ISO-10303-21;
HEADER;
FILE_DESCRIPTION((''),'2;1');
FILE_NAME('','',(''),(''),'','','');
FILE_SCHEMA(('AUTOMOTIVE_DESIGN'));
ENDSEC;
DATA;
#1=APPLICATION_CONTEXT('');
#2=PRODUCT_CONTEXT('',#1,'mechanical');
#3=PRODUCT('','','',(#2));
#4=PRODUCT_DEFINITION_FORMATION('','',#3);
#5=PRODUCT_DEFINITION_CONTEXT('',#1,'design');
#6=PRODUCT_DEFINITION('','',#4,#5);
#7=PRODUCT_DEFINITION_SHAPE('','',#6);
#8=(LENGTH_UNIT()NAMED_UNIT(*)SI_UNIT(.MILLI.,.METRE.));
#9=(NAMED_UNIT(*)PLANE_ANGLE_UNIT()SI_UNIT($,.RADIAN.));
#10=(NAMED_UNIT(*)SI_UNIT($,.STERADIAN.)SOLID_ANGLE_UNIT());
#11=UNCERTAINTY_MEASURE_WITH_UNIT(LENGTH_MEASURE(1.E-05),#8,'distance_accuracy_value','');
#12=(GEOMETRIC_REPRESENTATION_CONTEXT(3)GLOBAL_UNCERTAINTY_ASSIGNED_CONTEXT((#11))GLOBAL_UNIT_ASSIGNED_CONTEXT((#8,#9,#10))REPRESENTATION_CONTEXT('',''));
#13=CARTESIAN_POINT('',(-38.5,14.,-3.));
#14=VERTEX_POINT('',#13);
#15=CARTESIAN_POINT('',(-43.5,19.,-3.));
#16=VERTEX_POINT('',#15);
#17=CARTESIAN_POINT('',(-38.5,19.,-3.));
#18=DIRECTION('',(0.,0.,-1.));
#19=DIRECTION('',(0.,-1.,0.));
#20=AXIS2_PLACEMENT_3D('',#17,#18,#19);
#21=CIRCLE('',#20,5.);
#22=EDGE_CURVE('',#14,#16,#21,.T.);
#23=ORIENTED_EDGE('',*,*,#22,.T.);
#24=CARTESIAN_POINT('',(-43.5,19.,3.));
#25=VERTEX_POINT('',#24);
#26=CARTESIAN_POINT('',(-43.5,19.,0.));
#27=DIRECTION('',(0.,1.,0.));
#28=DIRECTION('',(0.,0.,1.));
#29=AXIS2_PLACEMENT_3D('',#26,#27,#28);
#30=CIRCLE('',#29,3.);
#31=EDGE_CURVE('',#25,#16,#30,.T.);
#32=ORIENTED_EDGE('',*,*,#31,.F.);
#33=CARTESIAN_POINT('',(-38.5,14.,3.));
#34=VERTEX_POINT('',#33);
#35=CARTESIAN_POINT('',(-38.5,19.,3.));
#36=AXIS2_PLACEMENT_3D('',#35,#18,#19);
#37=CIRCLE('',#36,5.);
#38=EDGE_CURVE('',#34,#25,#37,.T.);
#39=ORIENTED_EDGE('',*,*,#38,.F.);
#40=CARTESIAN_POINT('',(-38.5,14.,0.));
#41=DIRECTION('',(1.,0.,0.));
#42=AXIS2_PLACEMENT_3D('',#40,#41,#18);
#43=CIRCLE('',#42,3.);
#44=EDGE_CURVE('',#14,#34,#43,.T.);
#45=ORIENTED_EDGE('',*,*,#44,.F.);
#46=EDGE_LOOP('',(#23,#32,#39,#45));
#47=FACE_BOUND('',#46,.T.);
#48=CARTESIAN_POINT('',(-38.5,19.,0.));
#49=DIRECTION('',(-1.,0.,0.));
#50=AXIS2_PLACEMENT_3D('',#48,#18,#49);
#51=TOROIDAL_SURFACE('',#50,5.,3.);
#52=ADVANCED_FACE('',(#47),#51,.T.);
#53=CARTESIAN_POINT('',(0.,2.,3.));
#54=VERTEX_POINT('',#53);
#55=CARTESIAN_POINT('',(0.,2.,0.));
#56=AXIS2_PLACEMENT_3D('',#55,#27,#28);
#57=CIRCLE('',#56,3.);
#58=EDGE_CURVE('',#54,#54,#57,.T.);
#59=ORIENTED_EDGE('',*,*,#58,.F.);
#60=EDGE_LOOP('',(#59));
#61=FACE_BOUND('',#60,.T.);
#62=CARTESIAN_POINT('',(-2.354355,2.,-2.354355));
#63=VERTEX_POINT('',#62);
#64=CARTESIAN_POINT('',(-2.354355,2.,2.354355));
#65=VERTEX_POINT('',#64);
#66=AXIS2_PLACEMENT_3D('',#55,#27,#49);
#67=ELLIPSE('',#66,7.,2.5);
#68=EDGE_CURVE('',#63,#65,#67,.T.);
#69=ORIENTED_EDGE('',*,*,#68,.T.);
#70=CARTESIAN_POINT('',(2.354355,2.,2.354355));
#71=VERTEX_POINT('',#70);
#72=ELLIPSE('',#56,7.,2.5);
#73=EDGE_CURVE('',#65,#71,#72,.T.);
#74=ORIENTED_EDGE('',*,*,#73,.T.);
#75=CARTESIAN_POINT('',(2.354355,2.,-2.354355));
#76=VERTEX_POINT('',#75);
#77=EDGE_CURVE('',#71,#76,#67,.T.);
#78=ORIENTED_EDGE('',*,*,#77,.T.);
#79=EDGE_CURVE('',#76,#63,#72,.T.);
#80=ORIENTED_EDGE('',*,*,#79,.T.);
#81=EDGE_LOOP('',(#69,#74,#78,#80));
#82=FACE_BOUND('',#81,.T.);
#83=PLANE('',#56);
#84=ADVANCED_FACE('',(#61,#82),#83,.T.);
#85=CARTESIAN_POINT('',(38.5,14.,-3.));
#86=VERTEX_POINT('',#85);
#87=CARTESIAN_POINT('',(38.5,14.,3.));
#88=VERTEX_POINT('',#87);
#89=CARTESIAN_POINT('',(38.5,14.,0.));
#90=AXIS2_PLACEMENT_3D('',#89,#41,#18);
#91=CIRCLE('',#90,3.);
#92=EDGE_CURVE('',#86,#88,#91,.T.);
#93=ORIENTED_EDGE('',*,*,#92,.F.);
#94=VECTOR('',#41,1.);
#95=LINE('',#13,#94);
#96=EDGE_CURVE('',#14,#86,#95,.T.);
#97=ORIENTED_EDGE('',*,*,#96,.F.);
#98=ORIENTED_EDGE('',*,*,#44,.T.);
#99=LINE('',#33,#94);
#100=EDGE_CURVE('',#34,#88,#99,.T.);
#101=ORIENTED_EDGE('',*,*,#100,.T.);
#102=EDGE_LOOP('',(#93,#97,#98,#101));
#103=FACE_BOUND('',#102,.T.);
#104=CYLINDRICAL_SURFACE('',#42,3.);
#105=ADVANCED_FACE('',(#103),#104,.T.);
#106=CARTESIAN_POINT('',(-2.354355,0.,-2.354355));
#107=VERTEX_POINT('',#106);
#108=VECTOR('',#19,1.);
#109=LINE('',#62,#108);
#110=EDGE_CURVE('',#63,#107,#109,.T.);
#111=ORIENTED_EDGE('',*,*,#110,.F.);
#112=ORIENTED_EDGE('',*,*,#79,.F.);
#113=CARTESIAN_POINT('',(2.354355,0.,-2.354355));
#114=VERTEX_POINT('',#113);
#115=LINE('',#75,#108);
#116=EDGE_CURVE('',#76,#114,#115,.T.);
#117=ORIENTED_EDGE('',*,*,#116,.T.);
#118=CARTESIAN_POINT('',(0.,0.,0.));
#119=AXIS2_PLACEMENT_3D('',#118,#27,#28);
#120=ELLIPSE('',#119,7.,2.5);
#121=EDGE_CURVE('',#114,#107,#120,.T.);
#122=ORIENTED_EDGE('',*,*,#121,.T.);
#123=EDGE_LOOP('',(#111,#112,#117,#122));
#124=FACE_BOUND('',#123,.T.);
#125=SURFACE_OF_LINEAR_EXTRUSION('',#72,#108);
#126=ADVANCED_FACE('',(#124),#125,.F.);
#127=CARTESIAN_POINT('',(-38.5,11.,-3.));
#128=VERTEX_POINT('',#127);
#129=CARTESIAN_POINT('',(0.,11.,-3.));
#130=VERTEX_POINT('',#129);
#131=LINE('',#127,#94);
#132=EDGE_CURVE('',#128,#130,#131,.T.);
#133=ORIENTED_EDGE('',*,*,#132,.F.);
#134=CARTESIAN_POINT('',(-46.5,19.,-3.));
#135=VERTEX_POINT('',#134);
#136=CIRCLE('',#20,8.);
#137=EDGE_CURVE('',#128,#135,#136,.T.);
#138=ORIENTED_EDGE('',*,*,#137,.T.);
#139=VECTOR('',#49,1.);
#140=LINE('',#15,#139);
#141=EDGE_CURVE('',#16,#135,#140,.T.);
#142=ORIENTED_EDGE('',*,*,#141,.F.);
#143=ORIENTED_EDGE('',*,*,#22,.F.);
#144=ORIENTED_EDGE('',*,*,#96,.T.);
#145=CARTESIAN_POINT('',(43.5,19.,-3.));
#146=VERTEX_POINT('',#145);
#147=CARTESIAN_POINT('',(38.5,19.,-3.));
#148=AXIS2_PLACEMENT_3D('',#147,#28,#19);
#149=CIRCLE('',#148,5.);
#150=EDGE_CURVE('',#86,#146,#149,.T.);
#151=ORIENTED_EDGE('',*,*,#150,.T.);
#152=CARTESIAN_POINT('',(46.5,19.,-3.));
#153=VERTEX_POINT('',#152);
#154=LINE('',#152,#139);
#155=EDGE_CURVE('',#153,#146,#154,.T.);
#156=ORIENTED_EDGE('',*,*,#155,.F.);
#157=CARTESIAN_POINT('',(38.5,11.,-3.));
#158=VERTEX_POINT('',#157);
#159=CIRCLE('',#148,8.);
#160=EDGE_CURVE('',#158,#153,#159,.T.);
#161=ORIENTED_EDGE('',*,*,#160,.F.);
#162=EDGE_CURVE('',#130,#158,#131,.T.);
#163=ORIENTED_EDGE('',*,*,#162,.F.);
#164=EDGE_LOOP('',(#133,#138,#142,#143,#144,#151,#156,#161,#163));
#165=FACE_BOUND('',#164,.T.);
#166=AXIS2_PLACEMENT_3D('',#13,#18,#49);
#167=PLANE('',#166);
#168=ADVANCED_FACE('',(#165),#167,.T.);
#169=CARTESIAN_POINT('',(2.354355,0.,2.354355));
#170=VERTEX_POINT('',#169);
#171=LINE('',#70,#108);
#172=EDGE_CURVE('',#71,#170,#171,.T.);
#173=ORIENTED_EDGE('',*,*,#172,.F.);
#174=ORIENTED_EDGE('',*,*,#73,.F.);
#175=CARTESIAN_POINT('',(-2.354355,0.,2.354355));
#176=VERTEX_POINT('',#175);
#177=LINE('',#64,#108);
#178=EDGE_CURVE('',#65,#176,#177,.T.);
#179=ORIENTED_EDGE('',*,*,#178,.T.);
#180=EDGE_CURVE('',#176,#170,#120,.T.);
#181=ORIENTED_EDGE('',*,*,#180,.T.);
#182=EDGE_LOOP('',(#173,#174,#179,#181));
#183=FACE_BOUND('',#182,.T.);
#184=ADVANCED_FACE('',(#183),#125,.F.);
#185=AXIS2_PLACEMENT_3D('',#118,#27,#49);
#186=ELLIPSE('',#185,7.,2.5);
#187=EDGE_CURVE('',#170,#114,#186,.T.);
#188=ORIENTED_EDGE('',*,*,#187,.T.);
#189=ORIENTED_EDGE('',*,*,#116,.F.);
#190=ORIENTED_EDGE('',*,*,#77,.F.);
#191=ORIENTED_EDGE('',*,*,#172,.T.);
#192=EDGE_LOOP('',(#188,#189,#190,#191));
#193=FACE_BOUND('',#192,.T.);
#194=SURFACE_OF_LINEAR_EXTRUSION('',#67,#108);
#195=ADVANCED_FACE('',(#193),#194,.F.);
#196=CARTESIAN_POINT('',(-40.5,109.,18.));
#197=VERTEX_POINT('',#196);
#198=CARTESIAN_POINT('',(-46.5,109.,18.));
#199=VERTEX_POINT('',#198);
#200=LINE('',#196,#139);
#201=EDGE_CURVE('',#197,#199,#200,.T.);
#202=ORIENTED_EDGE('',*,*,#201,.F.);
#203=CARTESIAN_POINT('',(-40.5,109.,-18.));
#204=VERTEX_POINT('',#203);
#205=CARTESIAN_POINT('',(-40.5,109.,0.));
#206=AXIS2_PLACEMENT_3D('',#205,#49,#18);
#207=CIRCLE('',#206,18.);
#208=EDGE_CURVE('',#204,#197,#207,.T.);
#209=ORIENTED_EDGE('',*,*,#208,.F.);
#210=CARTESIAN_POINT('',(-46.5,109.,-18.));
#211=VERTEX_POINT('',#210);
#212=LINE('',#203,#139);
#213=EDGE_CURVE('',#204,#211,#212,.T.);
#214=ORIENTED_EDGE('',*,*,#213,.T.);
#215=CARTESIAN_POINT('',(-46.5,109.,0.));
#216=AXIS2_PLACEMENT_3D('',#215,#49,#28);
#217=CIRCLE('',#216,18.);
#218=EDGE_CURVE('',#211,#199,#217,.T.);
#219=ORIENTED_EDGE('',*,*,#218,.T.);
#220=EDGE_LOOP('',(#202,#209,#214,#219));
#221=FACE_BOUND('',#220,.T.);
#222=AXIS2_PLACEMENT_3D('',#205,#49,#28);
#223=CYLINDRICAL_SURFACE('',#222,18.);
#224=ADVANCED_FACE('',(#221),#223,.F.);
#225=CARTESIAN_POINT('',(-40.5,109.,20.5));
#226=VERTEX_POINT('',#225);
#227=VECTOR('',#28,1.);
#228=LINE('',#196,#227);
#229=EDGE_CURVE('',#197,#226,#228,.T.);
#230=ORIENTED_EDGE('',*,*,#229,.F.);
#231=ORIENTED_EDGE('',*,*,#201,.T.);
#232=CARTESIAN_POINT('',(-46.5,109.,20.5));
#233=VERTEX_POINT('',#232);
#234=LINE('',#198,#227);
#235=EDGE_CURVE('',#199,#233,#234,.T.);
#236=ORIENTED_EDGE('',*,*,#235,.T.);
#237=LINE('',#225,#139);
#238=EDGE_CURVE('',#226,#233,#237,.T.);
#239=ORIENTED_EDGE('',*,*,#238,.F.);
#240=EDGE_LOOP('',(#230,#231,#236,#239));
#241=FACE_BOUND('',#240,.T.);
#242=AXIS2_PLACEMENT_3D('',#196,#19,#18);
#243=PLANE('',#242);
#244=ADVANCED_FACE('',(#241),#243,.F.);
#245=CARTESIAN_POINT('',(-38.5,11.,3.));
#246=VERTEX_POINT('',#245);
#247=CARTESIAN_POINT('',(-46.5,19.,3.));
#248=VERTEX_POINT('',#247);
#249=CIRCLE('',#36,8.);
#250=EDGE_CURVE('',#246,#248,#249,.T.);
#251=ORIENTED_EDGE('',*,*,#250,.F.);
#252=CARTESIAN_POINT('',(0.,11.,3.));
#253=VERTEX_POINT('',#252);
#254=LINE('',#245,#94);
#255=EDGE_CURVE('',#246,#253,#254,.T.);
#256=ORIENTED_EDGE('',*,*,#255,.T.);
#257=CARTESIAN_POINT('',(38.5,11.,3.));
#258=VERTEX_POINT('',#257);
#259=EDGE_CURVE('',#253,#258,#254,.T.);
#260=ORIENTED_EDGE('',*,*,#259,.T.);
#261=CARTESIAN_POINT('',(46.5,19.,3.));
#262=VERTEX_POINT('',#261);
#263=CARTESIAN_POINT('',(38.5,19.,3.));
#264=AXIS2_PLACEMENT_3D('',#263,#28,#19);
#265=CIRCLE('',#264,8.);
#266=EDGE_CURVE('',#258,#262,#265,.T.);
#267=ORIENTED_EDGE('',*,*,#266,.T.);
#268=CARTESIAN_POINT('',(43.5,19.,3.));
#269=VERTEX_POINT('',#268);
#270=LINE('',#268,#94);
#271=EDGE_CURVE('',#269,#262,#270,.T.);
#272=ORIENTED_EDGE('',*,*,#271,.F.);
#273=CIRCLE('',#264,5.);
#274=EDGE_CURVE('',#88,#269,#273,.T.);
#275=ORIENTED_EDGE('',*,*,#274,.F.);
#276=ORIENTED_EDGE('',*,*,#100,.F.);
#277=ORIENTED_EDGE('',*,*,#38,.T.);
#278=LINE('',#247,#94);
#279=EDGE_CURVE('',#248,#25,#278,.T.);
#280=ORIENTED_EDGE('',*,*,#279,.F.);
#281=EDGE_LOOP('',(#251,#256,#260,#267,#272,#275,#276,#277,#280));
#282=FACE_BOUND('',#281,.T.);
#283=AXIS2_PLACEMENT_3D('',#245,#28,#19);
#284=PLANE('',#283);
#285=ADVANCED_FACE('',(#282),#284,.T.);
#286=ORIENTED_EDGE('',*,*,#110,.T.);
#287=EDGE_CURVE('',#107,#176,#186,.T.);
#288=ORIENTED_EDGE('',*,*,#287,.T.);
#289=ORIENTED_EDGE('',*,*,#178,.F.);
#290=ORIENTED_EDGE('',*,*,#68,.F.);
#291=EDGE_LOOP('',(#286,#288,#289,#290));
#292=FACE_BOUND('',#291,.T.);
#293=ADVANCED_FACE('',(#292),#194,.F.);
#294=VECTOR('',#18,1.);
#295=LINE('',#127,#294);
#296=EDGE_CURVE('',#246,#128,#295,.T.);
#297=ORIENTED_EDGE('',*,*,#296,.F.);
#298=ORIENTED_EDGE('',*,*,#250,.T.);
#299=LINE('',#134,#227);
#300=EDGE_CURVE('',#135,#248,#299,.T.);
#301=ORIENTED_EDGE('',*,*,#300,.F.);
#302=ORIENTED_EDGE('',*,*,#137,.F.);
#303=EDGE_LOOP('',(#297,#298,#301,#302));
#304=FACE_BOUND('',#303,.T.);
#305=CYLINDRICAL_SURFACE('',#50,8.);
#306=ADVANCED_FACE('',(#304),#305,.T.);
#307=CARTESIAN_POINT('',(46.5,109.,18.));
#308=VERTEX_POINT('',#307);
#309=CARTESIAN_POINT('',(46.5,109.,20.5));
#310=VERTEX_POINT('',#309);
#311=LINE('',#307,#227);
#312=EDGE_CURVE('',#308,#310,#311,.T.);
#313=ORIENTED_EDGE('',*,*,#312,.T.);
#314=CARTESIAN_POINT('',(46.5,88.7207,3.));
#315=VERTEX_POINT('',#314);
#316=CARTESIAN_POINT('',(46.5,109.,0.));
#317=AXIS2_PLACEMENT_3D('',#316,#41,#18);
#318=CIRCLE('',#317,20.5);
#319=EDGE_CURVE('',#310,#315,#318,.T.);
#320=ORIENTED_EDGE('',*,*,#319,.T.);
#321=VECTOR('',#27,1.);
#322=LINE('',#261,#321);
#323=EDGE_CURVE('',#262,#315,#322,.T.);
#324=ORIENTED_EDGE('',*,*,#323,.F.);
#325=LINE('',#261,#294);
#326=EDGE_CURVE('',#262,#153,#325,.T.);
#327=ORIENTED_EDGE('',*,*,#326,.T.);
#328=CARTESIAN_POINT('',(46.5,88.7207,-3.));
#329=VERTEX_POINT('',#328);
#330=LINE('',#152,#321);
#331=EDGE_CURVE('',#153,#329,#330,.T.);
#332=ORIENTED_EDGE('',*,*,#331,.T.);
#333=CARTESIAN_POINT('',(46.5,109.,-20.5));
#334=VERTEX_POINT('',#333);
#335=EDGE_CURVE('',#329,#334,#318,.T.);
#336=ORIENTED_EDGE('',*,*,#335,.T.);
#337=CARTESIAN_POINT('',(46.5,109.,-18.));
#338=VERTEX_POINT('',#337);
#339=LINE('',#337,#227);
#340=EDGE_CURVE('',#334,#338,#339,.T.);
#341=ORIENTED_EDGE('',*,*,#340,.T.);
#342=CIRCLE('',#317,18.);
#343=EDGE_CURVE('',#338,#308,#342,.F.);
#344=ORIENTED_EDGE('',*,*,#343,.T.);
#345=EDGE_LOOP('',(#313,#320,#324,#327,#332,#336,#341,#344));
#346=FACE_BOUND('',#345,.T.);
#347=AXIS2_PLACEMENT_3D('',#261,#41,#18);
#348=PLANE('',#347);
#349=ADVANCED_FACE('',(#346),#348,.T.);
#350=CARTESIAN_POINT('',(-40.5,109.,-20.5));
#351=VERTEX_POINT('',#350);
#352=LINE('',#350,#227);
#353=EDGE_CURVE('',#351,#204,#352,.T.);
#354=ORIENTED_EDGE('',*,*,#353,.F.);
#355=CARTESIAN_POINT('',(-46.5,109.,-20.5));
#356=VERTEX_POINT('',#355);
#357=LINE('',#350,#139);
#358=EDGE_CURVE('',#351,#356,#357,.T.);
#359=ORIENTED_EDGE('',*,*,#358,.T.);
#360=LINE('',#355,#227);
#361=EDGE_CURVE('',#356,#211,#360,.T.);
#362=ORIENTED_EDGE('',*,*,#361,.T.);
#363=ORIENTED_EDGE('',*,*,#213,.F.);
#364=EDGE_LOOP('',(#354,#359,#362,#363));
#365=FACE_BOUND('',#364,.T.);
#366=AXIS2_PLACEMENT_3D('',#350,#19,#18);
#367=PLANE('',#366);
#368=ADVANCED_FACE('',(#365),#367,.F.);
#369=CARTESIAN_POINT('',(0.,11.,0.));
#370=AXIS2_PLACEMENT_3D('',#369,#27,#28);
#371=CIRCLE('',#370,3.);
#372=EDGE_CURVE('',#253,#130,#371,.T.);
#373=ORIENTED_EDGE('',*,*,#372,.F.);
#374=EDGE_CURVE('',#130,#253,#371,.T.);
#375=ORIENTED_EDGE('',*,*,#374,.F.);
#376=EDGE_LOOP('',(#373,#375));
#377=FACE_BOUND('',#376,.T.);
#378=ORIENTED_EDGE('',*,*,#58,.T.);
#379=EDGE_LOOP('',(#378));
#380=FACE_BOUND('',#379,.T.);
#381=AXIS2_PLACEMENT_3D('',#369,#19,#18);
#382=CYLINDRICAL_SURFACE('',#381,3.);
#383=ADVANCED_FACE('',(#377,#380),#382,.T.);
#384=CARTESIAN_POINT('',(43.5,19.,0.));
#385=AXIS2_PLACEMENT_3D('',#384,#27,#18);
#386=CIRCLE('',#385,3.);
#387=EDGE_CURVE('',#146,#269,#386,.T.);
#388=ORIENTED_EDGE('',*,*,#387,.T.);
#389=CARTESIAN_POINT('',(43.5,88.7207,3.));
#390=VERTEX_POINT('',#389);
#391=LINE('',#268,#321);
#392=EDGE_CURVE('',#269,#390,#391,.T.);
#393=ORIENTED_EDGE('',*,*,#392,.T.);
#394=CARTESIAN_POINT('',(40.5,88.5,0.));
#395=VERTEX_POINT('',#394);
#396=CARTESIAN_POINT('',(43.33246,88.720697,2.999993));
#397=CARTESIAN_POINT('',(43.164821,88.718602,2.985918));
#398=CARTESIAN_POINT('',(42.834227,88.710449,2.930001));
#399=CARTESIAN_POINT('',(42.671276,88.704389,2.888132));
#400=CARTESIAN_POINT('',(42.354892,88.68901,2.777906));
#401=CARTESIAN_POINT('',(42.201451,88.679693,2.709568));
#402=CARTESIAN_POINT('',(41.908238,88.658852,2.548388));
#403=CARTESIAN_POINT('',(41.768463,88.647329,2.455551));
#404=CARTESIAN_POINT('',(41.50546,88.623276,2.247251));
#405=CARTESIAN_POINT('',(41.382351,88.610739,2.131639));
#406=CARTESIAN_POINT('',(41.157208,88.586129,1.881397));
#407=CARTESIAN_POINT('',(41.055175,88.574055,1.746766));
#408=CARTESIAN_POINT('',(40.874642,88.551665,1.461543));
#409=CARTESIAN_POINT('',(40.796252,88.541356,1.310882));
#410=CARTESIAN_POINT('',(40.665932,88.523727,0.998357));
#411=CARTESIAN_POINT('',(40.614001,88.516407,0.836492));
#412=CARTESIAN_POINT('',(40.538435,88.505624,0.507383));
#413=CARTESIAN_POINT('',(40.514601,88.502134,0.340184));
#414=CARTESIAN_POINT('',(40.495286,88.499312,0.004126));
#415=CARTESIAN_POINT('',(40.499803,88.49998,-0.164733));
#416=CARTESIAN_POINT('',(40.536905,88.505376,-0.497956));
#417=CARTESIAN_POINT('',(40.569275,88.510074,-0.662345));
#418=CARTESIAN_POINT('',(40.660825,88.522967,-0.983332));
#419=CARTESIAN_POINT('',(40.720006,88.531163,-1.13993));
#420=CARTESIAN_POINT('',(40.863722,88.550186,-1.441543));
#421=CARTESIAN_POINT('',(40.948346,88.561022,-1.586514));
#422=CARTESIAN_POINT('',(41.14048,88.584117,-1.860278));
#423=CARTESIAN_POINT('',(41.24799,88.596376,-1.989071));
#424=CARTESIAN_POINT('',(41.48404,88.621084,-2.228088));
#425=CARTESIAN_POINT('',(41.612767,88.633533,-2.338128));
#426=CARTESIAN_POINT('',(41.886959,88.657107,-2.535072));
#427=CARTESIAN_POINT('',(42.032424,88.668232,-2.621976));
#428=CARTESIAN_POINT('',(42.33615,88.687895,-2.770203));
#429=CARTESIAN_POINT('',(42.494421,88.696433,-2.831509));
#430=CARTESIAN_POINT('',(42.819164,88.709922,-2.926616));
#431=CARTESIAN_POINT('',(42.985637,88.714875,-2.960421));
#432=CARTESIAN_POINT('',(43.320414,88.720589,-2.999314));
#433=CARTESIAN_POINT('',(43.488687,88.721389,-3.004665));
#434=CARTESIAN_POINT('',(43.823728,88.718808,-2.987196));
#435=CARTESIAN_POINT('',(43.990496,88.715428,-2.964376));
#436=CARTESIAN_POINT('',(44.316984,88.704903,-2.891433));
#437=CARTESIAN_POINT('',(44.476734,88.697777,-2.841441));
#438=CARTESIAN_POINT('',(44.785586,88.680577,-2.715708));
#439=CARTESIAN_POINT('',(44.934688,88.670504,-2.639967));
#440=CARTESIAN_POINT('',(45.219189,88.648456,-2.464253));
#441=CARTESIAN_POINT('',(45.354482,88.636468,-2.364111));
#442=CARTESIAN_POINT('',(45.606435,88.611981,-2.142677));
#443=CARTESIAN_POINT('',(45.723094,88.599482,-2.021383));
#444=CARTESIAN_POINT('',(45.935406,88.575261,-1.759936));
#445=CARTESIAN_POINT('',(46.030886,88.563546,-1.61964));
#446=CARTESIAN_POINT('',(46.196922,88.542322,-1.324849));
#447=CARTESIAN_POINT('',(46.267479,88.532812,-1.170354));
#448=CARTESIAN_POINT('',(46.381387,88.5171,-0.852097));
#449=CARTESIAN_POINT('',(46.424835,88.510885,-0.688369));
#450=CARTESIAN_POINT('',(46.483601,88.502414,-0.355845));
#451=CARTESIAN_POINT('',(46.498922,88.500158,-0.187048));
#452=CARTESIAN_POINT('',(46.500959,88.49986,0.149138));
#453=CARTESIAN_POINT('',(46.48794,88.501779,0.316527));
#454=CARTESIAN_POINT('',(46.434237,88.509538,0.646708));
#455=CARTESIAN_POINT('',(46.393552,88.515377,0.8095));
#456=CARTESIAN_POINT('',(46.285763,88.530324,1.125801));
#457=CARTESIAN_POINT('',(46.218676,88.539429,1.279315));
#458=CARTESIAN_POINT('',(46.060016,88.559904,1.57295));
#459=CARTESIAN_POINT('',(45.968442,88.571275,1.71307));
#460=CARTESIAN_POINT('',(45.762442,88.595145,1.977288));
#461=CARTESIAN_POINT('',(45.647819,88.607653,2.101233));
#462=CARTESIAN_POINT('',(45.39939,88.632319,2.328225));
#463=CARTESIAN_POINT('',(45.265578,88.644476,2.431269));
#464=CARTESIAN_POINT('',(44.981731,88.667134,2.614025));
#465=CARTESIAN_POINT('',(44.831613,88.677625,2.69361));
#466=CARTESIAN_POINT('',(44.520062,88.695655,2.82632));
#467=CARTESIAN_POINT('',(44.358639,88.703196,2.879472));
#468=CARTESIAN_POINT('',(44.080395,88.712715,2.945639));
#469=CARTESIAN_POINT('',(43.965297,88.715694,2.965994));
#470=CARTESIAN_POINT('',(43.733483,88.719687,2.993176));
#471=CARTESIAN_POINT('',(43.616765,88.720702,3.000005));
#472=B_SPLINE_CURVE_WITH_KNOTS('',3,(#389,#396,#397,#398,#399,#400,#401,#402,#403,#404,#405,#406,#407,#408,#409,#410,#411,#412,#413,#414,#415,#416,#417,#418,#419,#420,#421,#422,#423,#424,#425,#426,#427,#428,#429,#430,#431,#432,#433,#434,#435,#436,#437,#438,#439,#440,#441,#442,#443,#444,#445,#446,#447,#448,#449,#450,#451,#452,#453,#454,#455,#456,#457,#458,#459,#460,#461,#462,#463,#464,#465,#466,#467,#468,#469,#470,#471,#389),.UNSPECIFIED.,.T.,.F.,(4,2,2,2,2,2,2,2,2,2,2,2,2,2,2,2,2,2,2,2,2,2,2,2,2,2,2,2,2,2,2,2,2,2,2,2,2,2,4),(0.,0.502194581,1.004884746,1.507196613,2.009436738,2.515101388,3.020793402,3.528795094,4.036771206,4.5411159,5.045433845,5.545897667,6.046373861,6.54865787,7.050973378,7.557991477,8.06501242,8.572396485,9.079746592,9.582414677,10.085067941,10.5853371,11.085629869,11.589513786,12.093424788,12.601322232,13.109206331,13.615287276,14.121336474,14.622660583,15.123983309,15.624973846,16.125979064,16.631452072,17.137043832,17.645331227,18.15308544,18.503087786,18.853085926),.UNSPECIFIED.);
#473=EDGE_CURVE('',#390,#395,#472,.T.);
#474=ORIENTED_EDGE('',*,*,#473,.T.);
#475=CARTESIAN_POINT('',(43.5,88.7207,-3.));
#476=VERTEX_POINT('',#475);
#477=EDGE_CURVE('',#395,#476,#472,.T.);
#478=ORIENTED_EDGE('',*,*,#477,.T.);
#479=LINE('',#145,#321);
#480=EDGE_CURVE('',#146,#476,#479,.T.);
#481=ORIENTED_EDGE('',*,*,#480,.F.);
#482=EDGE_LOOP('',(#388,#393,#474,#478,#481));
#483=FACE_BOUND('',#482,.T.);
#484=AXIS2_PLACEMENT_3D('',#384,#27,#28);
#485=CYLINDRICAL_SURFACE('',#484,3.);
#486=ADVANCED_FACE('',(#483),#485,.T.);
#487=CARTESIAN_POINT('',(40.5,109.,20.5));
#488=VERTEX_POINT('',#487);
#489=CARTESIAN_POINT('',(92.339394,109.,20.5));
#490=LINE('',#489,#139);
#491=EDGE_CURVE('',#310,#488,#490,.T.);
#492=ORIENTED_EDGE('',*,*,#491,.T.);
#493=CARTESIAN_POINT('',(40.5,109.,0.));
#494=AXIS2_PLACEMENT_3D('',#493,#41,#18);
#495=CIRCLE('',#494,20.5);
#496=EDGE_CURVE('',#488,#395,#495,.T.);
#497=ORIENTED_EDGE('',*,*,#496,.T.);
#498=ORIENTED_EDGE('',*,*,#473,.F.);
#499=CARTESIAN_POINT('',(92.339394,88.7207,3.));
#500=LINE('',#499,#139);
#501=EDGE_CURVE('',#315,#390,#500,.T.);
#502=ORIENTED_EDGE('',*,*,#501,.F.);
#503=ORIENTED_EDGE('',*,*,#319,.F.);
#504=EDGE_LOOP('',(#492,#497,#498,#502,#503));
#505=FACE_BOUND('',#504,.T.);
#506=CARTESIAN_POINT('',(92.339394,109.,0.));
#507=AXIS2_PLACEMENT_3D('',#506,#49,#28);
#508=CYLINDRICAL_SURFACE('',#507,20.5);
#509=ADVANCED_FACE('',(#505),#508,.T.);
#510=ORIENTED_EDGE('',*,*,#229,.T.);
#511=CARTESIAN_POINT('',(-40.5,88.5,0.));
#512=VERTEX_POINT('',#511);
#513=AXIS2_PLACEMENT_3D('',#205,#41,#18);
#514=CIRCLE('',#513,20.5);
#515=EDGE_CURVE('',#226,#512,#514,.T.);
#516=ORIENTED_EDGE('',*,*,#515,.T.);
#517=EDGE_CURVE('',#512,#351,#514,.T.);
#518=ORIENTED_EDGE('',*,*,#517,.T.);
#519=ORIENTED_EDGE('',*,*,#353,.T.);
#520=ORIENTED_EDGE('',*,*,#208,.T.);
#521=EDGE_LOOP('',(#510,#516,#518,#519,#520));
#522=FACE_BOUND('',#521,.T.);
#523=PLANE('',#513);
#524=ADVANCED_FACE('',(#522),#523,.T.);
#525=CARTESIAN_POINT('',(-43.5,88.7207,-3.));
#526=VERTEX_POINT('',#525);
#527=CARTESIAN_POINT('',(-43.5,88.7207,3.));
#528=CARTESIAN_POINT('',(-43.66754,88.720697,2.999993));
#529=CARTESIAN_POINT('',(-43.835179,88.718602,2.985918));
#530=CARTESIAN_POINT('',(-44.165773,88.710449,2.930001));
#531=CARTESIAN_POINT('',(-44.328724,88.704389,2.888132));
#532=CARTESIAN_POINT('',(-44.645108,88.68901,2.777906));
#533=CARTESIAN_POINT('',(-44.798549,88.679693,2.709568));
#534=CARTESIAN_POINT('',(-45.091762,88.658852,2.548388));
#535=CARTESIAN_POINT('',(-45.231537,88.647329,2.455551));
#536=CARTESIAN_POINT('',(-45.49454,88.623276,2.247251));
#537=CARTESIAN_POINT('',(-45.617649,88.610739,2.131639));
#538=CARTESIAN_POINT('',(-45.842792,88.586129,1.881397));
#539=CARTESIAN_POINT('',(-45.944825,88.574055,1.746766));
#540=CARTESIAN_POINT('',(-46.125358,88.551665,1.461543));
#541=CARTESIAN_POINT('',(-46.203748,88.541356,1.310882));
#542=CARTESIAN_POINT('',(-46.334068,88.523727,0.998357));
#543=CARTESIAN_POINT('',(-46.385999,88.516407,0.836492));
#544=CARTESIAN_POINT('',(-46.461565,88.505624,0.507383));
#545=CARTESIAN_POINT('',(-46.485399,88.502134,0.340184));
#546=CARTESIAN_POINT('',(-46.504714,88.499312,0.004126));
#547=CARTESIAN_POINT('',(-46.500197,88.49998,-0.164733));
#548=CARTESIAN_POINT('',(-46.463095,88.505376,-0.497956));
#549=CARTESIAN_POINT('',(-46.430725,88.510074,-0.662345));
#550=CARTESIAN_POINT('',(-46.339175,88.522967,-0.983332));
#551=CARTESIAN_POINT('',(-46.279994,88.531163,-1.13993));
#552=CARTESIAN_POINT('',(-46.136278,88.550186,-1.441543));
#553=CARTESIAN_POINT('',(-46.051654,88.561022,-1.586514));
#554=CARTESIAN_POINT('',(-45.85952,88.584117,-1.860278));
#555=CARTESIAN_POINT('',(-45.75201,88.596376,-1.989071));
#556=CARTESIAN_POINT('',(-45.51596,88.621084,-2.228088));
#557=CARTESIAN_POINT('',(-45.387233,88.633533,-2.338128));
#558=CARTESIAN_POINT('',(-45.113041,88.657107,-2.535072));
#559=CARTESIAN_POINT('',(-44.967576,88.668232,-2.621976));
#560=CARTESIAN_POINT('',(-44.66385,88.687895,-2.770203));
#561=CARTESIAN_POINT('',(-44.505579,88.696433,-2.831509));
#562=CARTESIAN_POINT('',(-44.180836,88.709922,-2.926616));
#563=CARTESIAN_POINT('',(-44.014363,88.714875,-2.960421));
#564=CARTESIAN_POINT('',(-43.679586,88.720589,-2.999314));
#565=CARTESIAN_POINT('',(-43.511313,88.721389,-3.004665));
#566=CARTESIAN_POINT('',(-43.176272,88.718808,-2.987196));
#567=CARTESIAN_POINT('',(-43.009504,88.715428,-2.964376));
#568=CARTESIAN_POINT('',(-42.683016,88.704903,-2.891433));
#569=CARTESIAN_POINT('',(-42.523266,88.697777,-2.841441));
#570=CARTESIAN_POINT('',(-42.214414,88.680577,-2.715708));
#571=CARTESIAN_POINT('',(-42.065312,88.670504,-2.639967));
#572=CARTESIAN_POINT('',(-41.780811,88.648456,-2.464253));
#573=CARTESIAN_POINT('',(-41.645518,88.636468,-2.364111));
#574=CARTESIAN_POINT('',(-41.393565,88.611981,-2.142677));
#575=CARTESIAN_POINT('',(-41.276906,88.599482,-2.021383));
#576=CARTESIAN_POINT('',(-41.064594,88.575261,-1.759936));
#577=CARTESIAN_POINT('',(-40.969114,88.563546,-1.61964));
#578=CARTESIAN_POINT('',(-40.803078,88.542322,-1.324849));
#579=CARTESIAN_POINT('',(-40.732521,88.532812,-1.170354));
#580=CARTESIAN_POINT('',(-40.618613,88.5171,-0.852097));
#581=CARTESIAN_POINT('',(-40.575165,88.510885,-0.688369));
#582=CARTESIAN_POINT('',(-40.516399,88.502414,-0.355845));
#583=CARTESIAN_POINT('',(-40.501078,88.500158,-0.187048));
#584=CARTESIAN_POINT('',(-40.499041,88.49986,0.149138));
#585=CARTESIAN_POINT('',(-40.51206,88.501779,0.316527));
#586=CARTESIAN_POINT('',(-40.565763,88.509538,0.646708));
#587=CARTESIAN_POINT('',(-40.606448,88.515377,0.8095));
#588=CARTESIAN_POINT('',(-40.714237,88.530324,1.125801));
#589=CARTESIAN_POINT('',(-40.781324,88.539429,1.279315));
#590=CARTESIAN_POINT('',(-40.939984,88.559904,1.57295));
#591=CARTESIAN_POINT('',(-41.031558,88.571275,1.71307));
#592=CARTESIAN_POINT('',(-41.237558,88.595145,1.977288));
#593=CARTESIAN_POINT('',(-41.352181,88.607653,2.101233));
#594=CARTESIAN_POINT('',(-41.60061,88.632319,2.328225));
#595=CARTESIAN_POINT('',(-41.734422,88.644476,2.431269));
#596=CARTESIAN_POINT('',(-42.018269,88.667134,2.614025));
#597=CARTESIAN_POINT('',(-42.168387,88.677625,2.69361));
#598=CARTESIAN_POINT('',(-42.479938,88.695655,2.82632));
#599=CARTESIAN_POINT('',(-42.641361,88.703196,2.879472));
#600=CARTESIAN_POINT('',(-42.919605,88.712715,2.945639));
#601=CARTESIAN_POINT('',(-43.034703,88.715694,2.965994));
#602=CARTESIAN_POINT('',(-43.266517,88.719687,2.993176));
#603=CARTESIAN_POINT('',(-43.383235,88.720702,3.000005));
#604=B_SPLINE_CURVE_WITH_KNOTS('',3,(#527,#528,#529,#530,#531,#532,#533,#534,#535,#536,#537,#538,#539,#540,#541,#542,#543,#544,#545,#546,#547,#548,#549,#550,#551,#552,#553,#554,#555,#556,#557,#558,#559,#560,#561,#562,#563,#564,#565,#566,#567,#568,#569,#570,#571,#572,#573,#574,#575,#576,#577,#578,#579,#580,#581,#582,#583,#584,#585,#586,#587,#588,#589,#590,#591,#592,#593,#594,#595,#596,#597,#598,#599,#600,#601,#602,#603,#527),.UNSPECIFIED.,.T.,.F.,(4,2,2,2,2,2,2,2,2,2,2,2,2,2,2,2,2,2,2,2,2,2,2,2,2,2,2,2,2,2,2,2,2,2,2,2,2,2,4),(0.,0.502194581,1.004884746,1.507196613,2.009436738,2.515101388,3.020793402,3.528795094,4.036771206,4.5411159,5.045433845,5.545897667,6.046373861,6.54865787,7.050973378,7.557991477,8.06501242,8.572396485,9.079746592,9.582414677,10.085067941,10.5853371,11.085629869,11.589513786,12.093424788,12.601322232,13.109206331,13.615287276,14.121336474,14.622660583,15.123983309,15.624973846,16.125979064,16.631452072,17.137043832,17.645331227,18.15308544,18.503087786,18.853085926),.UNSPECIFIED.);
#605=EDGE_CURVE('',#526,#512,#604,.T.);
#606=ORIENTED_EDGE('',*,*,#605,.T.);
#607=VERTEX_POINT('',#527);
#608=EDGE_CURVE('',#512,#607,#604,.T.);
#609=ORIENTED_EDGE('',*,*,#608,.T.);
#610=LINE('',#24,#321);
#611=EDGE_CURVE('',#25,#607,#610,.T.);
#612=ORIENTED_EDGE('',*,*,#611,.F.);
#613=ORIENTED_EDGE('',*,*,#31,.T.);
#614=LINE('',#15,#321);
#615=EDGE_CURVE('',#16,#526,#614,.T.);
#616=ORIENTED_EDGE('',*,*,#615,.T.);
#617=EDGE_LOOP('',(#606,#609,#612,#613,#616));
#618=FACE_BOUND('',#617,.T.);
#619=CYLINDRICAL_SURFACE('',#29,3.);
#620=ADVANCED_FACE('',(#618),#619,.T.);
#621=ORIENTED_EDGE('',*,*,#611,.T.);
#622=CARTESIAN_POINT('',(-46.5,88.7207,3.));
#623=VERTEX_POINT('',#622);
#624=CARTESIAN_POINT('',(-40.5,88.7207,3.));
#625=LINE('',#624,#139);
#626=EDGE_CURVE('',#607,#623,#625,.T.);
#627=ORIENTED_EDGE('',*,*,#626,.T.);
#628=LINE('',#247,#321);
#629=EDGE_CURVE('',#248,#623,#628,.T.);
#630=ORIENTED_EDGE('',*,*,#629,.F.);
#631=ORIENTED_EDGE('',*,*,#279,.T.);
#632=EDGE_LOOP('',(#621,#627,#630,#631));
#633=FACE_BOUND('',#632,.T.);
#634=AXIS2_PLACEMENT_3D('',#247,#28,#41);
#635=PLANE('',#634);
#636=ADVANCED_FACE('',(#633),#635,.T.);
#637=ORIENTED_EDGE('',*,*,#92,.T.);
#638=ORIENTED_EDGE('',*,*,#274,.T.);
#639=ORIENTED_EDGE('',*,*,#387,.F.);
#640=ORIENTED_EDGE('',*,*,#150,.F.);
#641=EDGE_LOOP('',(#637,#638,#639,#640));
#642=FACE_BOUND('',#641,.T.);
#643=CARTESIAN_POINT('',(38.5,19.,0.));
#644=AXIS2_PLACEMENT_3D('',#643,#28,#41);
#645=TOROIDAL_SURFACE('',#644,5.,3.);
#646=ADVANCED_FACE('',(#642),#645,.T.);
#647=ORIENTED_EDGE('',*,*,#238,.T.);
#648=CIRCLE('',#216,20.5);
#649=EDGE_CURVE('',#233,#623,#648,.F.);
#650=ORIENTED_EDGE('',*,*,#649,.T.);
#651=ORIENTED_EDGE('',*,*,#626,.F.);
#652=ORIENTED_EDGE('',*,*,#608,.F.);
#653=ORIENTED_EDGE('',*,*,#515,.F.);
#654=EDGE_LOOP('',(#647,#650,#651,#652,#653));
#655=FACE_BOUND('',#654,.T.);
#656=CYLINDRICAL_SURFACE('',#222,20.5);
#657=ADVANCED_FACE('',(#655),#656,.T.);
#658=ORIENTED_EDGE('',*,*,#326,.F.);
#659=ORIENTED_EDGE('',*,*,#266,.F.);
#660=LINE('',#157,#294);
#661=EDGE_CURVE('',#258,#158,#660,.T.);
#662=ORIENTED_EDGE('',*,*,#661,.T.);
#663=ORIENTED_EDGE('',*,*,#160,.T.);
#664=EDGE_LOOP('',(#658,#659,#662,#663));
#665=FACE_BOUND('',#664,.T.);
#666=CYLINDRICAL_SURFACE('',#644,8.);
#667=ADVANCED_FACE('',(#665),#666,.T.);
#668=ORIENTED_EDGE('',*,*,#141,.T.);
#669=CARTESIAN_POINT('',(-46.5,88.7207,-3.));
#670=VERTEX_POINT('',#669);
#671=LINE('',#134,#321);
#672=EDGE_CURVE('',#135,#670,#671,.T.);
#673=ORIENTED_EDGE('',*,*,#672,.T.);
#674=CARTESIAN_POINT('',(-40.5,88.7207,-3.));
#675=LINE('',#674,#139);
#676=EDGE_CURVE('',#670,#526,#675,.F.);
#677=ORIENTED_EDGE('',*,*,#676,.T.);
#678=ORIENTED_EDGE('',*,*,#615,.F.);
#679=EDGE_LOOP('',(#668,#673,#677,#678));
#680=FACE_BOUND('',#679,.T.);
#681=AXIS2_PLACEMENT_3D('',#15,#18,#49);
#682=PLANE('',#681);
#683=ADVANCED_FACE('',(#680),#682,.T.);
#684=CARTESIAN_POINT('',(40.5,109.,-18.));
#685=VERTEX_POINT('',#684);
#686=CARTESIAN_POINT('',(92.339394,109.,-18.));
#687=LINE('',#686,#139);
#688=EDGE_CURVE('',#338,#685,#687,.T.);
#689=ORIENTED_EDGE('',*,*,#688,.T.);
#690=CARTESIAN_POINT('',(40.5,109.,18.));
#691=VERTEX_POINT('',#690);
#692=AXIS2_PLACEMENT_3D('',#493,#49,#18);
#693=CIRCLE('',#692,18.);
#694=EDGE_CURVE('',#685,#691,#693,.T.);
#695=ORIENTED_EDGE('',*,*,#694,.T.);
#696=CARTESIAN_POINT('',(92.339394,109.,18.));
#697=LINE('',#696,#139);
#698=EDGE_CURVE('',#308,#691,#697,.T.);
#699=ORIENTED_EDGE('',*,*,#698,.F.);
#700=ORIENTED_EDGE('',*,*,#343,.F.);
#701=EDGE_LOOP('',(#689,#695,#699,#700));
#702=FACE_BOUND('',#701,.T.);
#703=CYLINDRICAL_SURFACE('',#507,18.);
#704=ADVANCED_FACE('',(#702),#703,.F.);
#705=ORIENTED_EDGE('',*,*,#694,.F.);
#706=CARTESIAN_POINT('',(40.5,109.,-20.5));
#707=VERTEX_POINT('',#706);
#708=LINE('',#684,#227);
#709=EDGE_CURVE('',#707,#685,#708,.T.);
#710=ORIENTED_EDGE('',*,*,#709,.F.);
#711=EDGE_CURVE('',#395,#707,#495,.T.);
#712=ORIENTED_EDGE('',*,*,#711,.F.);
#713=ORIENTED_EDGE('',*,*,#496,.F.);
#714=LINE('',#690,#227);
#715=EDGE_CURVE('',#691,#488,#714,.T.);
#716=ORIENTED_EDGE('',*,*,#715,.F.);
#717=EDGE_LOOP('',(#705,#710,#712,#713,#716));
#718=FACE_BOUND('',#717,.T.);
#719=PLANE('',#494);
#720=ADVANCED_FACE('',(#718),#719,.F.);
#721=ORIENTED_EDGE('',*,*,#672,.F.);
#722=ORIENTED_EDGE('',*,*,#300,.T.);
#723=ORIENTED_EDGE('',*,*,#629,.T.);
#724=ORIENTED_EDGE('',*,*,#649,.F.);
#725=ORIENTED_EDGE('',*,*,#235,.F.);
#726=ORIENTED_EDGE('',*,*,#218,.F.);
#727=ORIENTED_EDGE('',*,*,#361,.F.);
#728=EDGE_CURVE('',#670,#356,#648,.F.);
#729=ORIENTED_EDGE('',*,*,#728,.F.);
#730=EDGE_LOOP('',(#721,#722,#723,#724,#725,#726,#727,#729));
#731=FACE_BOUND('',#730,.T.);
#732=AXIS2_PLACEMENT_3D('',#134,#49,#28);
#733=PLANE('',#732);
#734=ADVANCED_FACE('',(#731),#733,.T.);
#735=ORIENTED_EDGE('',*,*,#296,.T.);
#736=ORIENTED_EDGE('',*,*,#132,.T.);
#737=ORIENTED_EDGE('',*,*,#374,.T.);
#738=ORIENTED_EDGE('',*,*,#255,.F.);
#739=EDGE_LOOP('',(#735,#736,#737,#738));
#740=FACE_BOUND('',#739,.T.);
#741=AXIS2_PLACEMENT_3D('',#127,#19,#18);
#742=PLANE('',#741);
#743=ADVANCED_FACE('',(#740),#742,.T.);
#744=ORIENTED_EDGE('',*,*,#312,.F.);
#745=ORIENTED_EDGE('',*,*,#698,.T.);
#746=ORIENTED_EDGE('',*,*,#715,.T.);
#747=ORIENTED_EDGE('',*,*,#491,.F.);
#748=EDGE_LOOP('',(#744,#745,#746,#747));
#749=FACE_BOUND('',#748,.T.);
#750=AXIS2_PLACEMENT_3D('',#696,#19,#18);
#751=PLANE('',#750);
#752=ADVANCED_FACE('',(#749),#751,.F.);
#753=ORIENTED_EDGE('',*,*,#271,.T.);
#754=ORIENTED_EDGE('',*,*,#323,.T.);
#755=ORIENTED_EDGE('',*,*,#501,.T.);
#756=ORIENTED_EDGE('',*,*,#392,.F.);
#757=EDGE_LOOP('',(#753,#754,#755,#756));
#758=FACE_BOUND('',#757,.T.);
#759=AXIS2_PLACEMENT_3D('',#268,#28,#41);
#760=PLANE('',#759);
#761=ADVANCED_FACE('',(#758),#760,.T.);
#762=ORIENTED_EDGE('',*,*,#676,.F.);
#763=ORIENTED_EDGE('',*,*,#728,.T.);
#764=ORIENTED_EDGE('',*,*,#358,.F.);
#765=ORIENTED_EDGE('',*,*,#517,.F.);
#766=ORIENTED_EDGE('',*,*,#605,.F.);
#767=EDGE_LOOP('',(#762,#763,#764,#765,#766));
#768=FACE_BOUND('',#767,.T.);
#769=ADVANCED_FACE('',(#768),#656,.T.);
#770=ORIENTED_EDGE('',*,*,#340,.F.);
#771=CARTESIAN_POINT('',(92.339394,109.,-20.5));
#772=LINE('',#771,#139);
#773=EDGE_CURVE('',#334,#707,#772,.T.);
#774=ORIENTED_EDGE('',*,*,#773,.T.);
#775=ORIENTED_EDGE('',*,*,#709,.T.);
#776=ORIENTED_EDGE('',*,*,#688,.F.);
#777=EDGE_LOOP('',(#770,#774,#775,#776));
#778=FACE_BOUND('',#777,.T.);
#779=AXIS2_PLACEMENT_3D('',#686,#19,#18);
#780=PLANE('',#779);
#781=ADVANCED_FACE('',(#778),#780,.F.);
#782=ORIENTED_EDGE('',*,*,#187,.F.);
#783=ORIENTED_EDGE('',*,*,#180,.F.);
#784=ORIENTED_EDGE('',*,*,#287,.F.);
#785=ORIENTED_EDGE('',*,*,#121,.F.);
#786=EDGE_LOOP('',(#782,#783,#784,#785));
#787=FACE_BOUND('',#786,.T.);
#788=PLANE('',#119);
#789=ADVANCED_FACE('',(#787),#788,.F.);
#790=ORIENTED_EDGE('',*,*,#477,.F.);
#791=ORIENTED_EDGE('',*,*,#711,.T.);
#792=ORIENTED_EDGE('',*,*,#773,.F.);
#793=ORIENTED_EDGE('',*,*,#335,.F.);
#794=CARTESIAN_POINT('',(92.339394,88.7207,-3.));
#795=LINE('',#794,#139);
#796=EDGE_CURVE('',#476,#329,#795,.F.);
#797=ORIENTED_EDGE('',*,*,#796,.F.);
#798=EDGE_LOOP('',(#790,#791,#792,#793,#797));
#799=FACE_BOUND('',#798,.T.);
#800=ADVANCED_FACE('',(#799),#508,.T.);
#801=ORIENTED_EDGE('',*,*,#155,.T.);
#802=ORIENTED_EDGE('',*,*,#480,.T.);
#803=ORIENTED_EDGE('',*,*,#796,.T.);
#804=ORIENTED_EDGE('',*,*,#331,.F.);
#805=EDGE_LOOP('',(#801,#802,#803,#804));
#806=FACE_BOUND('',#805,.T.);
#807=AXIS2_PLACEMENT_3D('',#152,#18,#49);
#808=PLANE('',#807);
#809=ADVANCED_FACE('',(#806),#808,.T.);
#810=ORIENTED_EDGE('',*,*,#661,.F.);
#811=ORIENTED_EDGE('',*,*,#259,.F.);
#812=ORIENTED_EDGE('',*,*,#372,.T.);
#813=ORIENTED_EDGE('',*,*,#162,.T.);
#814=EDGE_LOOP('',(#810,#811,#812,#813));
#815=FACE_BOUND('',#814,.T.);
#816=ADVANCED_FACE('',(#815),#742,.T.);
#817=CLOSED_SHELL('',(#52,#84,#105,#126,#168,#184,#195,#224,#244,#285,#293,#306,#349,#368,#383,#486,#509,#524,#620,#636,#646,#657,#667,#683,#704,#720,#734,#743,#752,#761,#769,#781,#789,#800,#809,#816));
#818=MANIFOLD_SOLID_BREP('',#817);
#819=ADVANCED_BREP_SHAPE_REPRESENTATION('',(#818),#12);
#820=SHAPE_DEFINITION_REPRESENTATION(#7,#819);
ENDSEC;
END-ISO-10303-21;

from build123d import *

# Parameters (mm, degrees)
BOSS_EXTRUDE3_DEPTH             = 2
SKETCH3_R                       = 3
BOSS_EXTRUDE4_DEPTH             = 9
BOSS_EXTRUDE5_DEPTH             = 38.5
BOSS_EXTRUDE5_DEPTH_BACK        = 38.5
SWEEP2_START                    = 11
SWEEP2_DEPTH                    = 78
SWEEP2_2_DEPTH                  = 8
SWEEP2_START_2                  = -4
SWEEP2_3_DEPTH                  = 8
SWEEP4_START                    = 11
SWEEP4_DEPTH                    = 78
SWEEP4_2_DEPTH                  = 8
SWEEP4_START_2                  = -4
SWEEP4_3_DEPTH                  = 8
BOSS_EXTRUDE6_DEPTH             = 3
BOSS_EXTRUDE6_DIRECTION_2_REACH = 128.768
BOSS_EXTRUDE7_DEPTH             = 3
BOSS_EXTRUDE7_DEPTH_BACK        = 3


with BuildPart() as part:
    # Sketch2 → Boss-Extrude3 (new body)
    with BuildSketch(Plane(origin=(0, 0, 0), x_dir=(1, 0, 0), z_dir=(0, 1, 0))):
        with BuildLine():
            add(Edge.make_bspline(
                [(-2.354354779, -2.354354779), (0, -20.812496246), (2.354354779, -2.354354779)],
                knots=[5.055412921, 5.055412921, 5.055412921, 7.510957694, 7.510957694, 7.510957694], degree=2, weights=[1, 0.336336397, 1]))
            add(Edge.make_bspline(
                [(2.354354779, -2.354354779), (20.812496246, 0), (2.354354779, 2.354354779)],
                knots=[1.913820267, 1.913820267, 1.913820267, 4.36936504, 4.36936504, 4.36936504], degree=2, weights=[1, 0.336336397, 1]))
            add(Edge.make_bspline(
                [(2.354354779, 2.354354779), (0, 20.812496246), (-2.354354779, 2.354354779)],
                knots=[1.913820267, 1.913820267, 1.913820267, 4.36936504, 4.36936504, 4.36936504], degree=2, weights=[1, 0.336336397, 1]))
            add(Edge.make_bspline(
                [(-2.354354779, 2.354354779), (-20.812496246, 0), (-2.354354779, -2.354354779)],
                knots=[5.055412921, 5.055412921, 5.055412921, 7.510957694, 7.510957694, 7.510957694], degree=2, weights=[1, 0.336336397, 1]))
        make_face()
    extrude(amount=BOSS_EXTRUDE3_DEPTH)

    # Sketch3 → Boss-Extrude4 (add)
    with BuildSketch(Plane(origin=(0, 2, 0), x_dir=(1, 0, 0), z_dir=(0, 1, 0))):
        with Locations(Location((0, 0, 0), (0, 0, 270))):
            Circle(SKETCH3_R)
    extrude(amount=BOSS_EXTRUDE4_DEPTH)

    # Sketch4 → Boss-Extrude5 (add, two sides: drawn at the far end of the back side and taken through both)
    with BuildSketch(Plane(origin=(0, 0, 0), x_dir=(0, 0, -1), z_dir=(1, 0, 0)).offset(-BOSS_EXTRUDE5_DEPTH_BACK)):
        with BuildLine():
            Line((3, 11), (-3, 11))
            Line((-3, 11), (-3, 14))
            ThreePointArc((-3, 14), (0, 17), (3, 14))
            Line((3, 14), (3, 11))
        make_face()
    extrude(amount=BOSS_EXTRUDE5_DEPTH + BOSS_EXTRUDE5_DEPTH_BACK)



with BuildPart() as body_2:
    # Sweep2: read off the stored shape, not the designer's step
    # Sweep2 outline → Sweep2 (new body)
    with BuildSketch(Plane(origin=(0, 0, 0), x_dir=(1, 0, 0), z_dir=(0, 1, 0)).offset(SWEEP2_START)):
        with BuildLine():
            Line((46.5, -3), (46.5, 3))
            Line((46.5, 3), (43.5, 3))
            ThreePointArc((43.5, 3), (40.5, 0), (43.5, -3))
            Line((43.5, -3), (46.5, -3))
        make_face()
    extrude(amount=SWEEP2_DEPTH)


with BuildPart() as part_1:
    add(part.part)

    add(body_2.part)  # Sweep2 2 merges body 2
    # Sweep2 2 outline → Sweep2 2 (add)
    with BuildSketch(Plane(origin=(0, 0, 0), x_dir=(1, 0, 0), z_dir=(0, 1, 0)).offset(SWEEP2_START)):
        with BuildLine():
            ThreePointArc((43.5, -3), (40.5, 0), (43.5, 3))
            Line((43.5, 3), (38.5, 3))
            Line((38.5, 3), (38.5, -3))
            Line((38.5, -3), (43.5, -3))
        make_face()
    extrude(amount=SWEEP2_2_DEPTH)

    # Sweep2 3 outline → Sweep2 3 (cut)
    with BuildSketch(Plane.XY.offset(SWEEP2_START_2)):
        with BuildLine():
            ThreePointArc((46.5, 19), (44.156854249, 13.343145751), (38.5, 11))
            Line((38.5, 11), (46.5, 11))
            Line((46.5, 11), (46.5, 19))
        make_face()
    extrude(amount=SWEEP2_3_DEPTH, mode=Mode.SUBTRACT)

    # Sweep2 4 outline → Sweep2 4 (revolve, cut)
    with BuildSketch(Plane(origin=(38.5, 19, 0), x_dir=(1, 0, 0), z_dir=(0, -1, 0))):
        with BuildLine():
            ThreePointArc((5, -3), (2, 0), (5, 3))
            Line((5, 3), (0, 3))
            Line((0, 3), (0, -3))
            Line((0, -3), (5, -3))
        make_face()
    revolve(axis=Axis((38.5, 19, 0), (0, 0, 1)), mode=Mode.SUBTRACT)



with BuildPart() as body_2_2:
    # Sweep4: read off the stored shape, not the designer's step
    # Sweep4 outline → Sweep4 (new body)
    with BuildSketch(Plane(origin=(0, 0, 0), x_dir=(1, 0, 0), z_dir=(0, 1, 0)).offset(SWEEP4_START)):
        with BuildLine():
            ThreePointArc((-43.5, -3), (-40.5, 0), (-43.5, 3))
            Line((-43.5, 3), (-46.5, 3))
            Line((-46.5, 3), (-46.5, -3))
            Line((-46.5, -3), (-43.5, -3))
        make_face()
    extrude(amount=SWEEP4_DEPTH)


with BuildPart() as part_2:
    add(part_1.part)

    add(body_2_2.part)  # Sweep4 2 merges body 2 2
    # Sweep4 2 outline → Sweep4 2 (add)
    with BuildSketch(Plane(origin=(0, 0, 0), x_dir=(1, 0, 0), z_dir=(0, 1, 0)).offset(SWEEP4_START)):
        with BuildLine():
            Line((-38.5, -3), (-38.5, 3))
            Line((-38.5, 3), (-43.5, 3))
            ThreePointArc((-43.5, 3), (-40.5, 0), (-43.5, -3))
            Line((-43.5, -3), (-38.5, -3))
        make_face()
    extrude(amount=SWEEP4_2_DEPTH)

    # Sweep4 3 outline → Sweep4 3 (cut)
    with BuildSketch(Plane.XY.offset(SWEEP4_START_2)):
        with BuildLine():
            Line((-46.5, 11), (-38.5, 11))
            ThreePointArc((-38.5, 11), (-44.156854249, 13.343145751), (-46.5, 19))
            Line((-46.5, 19), (-46.5, 11))
        make_face()
    extrude(amount=SWEEP4_3_DEPTH, mode=Mode.SUBTRACT)

    # Sweep4 4 outline → Sweep4 4 (revolve, cut)
    with BuildSketch(Plane(origin=(-38.5, 19, 0), x_dir=(1, 0, 0), z_dir=(0, -1, 0))):
        with BuildLine():
            Line((0, -3), (5, -3))
            ThreePointArc((5, -3), (2, 0), (5, 3))
            Line((5, 3), (0, 3))
            Line((0, 3), (0, -3))
        make_face()
    revolve(axis=Axis((-38.5, 19, 0), (0, 0, 1)), mode=Mode.SUBTRACT)

    # Sketch8 → Boss-Extrude6 (add)
    with BuildSketch(Plane(origin=(-43.5, 0, 0), x_dir=(0, 0, -1), z_dir=(1, 0, 0))):
        with BuildLine():
            Line((20.5, 109), (18, 109))
            ThreePointArc((18, 109), (0, 91), (-18, 109))
            Line((-18, 109), (-20.5, 109))
            ThreePointArc((-20.5, 109), (0, 88.5), (20.5, 109))
        make_face()
    extrude(amount=BOSS_EXTRUDE6_DEPTH)

    # Boss-Extrude6 direction 2: up to this face of the body (flat: up to its plane)
    boss_extrude6_direction_2_end = Plane(part_2.part.faces().sort_by_distance((-46.5, 54, 0))[0])
    # Sketch8 → Boss-Extrude6 direction 2 (add, up to the picked face)
    with BuildSketch(Plane(origin=(-43.5, 0, 0), x_dir=(0, 0, -1), z_dir=(1, 0, 0)), mode=Mode.PRIVATE) as boss_extrude6_direction_2_sk1:
        with BuildLine():
            Line((20.5, 109), (18, 109))
            ThreePointArc((18, 109), (0, 91), (-18, 109))
            Line((-18, 109), (-20.5, 109))
            ThreePointArc((-20.5, 109), (0, 88.5), (20.5, 109))
        make_face()
    boss_extrude6_direction_2_tool1 = split(extrude(boss_extrude6_direction_2_sk1.sketch, amount=-BOSS_EXTRUDE6_DIRECTION_2_REACH, mode=Mode.PRIVATE), bisect_by=boss_extrude6_direction_2_end, keep=Keep.BOTH, mode=Mode.PRIVATE)
    add(boss_extrude6_direction_2_tool1.solids().sort_by(Axis((-43.5, 108.541606, -19.25), (-1, 0, 0)))[0])

    # Sketch9 → Boss-Extrude7 (add, two sides: drawn at the far end of the back side and taken through both)
    with BuildSketch(Plane(origin=(43.5, 0, 0), x_dir=(0, 0, -1), z_dir=(1, 0, 0)).offset(-BOSS_EXTRUDE7_DEPTH_BACK)):
        with BuildLine():
            Line((-18, 109), (-20.5, 109))
            ThreePointArc((-20.5, 109), (0, 88.5), (20.5, 109))
            Line((20.5, 109), (18, 109))
            ThreePointArc((18, 109), (0, 91), (-18, 109))
        make_face()
    extrude(amount=BOSS_EXTRUDE7_DEPTH + BOSS_EXTRUDE7_DEPTH_BACK)


solid = part_2.part
